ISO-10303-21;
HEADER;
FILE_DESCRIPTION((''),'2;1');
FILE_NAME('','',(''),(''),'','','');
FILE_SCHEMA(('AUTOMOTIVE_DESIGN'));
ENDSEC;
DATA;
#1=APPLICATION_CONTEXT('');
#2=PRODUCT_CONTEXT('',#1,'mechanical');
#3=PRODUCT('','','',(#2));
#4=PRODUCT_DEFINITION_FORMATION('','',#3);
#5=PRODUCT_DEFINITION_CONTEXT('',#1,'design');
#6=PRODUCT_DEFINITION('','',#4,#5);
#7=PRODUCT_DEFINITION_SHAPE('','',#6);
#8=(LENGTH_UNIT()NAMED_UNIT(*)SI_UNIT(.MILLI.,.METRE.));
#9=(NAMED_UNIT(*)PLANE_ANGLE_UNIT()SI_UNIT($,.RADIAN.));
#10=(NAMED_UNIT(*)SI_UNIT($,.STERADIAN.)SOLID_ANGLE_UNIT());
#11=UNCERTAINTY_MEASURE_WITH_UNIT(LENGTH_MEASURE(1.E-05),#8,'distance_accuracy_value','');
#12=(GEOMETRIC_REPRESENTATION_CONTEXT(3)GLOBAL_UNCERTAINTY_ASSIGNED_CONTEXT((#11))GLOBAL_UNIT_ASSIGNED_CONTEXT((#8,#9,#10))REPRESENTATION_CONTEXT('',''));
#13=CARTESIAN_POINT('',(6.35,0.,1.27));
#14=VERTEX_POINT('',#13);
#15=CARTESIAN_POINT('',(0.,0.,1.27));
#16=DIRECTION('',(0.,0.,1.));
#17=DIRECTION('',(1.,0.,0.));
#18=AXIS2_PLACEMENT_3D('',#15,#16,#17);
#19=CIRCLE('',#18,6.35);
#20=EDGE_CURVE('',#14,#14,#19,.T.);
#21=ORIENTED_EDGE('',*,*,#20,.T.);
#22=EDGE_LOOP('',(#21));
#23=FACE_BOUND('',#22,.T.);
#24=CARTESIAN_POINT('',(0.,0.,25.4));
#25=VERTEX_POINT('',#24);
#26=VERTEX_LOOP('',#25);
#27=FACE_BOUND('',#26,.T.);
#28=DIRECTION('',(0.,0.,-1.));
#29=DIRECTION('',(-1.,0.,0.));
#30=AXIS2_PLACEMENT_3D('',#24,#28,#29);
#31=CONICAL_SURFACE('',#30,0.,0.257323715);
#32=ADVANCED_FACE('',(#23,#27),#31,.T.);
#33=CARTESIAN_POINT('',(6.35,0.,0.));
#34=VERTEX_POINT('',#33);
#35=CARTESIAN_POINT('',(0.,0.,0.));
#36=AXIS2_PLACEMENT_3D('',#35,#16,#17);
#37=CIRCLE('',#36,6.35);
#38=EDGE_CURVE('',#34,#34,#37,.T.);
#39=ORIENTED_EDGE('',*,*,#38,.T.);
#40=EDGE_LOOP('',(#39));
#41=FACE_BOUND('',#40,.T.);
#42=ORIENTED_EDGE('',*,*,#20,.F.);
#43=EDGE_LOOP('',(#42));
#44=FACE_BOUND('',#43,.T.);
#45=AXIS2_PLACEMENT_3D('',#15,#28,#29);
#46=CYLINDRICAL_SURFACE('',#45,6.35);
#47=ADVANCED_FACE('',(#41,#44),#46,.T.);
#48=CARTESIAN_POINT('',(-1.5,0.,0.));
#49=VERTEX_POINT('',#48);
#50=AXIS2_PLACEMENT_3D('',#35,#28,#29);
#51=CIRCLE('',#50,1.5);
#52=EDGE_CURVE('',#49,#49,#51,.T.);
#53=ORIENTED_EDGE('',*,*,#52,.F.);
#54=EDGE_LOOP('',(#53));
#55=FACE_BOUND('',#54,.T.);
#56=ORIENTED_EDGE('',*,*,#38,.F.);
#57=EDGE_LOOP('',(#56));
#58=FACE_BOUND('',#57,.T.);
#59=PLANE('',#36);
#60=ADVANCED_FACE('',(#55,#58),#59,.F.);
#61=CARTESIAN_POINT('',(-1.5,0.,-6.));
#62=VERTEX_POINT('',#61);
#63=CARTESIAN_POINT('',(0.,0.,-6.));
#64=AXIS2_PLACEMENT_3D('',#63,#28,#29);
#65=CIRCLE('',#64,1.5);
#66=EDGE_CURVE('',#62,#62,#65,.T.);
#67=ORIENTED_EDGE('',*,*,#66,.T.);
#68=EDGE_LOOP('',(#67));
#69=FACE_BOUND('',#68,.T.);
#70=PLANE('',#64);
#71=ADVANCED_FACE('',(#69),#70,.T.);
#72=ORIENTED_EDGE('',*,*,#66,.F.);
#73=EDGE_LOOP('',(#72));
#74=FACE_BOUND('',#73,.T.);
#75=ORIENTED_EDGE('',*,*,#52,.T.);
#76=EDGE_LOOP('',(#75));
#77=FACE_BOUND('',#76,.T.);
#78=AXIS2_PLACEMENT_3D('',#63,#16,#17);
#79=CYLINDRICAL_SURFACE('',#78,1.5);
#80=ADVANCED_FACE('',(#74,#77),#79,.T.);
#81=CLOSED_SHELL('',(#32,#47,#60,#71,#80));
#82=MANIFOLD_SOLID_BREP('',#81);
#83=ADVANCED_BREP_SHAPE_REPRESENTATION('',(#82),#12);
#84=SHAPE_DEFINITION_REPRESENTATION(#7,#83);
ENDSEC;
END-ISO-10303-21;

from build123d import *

# Parameters (mm, degrees)
SKETCH1_R           = 6.35
BOSS_EXTRUDE1_DEPTH = 1.27
SKETCH3_R           = 1.5
BOSS_EXTRUDE2_DEPTH = 6


# Read off the part's stored shape, not the designer's step: Loft1
with BuildPart() as part:
    # Sketch1 → Boss-Extrude1 (new body)
    with BuildSketch(Plane.XY):
        Circle(SKETCH1_R)
    extrude(amount=BOSS_EXTRUDE1_DEPTH)

    # Loft1 outline → Loft1 (revolve)
    with BuildSketch(Plane.XZ):
        Polygon((6.35, 1.27), (0, 25.4), (0, 1.27), align=None)
    revolve(axis=Axis((0, 0, 0), (0, 0, 1)))

    # Sketch3 → Boss-Extrude2 (add)
    with BuildSketch(Plane(origin=(0, 0, 0), x_dir=(-1, 0, 0), z_dir=(0, 0, -1))):
        Circle(SKETCH3_R)
    extrude(amount=BOSS_EXTRUDE2_DEPTH)


solid = part.part
